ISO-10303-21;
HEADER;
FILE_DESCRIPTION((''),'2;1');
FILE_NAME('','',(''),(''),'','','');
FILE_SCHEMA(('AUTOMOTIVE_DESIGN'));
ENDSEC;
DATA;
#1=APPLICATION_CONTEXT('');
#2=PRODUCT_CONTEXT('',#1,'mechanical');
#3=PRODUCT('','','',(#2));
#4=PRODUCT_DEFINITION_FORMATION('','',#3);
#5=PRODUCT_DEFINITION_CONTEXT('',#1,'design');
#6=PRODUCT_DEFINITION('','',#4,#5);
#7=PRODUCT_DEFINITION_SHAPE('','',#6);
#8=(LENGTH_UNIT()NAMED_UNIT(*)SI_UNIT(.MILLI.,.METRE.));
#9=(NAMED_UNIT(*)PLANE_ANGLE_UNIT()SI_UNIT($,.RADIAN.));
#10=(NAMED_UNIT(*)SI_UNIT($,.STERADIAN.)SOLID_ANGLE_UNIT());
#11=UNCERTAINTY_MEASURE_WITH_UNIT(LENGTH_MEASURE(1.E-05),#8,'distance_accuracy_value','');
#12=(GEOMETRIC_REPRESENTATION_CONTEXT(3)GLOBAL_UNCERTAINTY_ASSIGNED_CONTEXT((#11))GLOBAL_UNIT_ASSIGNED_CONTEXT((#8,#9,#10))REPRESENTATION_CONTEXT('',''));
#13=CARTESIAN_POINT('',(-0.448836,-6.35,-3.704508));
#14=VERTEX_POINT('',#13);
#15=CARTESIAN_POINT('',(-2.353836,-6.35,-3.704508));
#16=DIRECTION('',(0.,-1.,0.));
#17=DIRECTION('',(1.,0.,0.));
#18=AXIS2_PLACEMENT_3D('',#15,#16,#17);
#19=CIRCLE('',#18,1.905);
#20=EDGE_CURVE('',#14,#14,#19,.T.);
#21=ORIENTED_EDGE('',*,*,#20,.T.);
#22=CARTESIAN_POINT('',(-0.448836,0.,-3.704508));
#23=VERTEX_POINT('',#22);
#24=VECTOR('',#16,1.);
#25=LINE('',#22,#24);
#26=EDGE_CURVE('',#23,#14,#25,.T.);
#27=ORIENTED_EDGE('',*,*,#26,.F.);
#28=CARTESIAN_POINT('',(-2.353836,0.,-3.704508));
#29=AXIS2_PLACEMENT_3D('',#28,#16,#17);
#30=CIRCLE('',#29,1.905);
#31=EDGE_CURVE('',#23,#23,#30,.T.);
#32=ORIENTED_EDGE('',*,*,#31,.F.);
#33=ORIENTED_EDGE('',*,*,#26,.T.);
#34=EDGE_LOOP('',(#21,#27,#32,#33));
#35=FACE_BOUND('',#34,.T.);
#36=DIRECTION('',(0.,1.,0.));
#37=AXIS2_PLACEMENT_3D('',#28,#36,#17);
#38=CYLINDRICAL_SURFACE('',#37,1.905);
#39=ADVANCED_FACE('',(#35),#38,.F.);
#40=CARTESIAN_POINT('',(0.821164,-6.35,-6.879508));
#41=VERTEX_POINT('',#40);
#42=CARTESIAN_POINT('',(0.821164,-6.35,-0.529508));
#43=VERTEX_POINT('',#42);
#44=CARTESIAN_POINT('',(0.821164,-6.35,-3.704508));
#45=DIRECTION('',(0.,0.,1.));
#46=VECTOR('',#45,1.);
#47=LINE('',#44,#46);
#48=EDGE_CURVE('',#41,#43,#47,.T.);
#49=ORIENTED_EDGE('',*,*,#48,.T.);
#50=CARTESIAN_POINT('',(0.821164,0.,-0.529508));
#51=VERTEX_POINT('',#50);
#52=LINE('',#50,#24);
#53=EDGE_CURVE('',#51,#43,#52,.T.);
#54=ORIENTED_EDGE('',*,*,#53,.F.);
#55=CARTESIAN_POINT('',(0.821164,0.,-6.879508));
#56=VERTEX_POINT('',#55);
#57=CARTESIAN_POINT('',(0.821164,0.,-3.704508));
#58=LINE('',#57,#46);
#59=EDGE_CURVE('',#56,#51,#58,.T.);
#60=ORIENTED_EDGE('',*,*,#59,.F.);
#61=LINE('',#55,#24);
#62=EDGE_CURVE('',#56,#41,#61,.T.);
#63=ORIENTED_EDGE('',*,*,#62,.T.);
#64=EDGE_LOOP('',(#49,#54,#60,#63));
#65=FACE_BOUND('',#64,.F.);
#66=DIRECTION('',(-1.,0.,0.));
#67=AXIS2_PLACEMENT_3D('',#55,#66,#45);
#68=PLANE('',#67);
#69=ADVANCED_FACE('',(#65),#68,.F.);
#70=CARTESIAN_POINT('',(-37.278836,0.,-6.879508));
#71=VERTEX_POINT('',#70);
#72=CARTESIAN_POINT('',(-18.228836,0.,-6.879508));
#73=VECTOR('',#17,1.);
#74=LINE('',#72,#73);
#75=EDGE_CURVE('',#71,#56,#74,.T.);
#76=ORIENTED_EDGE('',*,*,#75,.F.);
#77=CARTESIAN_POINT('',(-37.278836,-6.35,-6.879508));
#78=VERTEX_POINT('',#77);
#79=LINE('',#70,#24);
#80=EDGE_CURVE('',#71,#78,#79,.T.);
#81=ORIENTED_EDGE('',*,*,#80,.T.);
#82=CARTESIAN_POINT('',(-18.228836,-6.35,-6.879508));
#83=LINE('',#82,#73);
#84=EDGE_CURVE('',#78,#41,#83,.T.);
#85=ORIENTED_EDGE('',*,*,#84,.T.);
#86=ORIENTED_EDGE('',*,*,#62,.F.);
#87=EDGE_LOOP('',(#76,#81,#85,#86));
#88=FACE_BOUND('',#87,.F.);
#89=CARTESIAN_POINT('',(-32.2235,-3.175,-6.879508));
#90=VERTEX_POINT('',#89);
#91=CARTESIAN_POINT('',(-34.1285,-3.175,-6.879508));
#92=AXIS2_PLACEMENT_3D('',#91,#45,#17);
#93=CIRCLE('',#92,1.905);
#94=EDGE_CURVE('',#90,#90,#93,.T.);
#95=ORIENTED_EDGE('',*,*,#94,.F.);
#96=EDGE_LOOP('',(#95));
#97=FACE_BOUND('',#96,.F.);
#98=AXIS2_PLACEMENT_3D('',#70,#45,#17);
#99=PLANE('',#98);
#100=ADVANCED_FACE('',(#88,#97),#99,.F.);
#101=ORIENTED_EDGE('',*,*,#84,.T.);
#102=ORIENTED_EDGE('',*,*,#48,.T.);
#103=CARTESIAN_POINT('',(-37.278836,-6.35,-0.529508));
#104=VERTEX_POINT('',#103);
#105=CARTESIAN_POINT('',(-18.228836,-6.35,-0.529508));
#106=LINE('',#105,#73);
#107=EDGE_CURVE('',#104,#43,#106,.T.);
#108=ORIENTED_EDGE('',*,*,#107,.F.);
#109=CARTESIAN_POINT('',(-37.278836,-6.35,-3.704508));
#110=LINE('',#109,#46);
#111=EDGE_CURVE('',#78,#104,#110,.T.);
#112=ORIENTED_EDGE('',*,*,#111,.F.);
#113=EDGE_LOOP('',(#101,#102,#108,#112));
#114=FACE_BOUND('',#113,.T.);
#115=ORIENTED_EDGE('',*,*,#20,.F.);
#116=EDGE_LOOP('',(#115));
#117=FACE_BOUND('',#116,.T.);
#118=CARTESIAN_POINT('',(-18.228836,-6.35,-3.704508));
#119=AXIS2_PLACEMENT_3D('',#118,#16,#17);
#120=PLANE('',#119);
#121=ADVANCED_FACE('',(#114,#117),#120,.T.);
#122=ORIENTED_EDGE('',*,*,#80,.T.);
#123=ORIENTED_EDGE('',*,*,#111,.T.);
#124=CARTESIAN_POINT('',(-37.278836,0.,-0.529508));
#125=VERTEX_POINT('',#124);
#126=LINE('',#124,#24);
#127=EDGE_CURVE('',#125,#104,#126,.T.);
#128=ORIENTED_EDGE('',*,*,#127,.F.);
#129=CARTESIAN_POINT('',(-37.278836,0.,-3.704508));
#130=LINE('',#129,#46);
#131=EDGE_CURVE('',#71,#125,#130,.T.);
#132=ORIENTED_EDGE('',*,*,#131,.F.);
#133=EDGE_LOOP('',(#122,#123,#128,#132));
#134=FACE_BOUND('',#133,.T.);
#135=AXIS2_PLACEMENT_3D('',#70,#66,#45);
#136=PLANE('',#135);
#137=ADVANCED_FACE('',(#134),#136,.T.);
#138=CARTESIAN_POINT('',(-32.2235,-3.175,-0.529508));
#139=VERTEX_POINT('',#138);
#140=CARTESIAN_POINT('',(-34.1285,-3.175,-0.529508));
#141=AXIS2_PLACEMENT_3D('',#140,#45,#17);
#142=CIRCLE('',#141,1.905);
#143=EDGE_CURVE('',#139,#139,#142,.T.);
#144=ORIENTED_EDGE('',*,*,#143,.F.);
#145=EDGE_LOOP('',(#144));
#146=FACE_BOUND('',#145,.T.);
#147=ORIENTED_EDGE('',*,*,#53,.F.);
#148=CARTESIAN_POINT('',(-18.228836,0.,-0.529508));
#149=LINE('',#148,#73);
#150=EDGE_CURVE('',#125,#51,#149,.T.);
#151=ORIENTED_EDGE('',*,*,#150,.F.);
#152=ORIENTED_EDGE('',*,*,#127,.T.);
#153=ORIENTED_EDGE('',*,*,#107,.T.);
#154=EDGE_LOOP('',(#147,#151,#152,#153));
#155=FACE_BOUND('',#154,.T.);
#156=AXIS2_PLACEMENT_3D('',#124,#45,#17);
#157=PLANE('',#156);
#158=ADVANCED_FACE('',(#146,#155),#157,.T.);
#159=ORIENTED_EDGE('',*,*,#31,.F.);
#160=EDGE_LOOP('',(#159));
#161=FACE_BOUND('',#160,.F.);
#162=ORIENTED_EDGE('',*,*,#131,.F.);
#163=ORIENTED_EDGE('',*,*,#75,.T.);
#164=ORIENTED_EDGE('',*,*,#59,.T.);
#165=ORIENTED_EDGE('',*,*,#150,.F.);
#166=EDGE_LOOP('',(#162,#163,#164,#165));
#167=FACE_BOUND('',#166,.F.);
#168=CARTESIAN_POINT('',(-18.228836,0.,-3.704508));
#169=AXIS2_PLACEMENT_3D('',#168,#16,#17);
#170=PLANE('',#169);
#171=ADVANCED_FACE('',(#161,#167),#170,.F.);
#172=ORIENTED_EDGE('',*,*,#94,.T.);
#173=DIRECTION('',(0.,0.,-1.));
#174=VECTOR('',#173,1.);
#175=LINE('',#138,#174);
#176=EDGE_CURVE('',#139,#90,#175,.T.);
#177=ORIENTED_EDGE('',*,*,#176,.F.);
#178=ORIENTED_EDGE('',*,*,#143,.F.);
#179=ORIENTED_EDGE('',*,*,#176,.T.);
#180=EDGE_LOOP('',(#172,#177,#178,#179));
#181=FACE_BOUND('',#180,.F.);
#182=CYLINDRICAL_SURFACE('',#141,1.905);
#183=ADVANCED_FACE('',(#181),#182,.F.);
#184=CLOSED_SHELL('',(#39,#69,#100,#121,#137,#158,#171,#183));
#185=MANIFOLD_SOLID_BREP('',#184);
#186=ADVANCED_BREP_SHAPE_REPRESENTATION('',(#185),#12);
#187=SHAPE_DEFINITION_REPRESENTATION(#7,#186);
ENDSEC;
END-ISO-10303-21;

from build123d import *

# Parameters (mm, degrees)
F0_W     = 38.1
F0_H     = 6.35
F0_R     = 1.905
F1_DEPTH = 6.35
F2_R     = 1.905
F3_DEPTH = 6.35


# Not quite as in the source:
# - a feature names something its author has since deleted; it is built from what else it names


with BuildPart() as f1:
    # F0 (on Front) → F1 (new body)
    with BuildSketch(Plane.XZ):
        with Locations((-18.2288356441, -3.7045082716)):
            Rectangle(F0_W, F0_H)
        with Locations((-2.3538356441, -3.7045082716)):
            Circle(F0_R, mode=Mode.SUBTRACT)
    extrude(amount=F1_DEPTH)

    # F2 (on face) → F3 (cut)
    with BuildSketch(Plane.XY.offset(-0.5295082716)):
        with Locations((-34.1285004571, -3.175)):
            Circle(F2_R)
    extrude(amount=-F3_DEPTH, mode=Mode.SUBTRACT)


solid = f1.part
